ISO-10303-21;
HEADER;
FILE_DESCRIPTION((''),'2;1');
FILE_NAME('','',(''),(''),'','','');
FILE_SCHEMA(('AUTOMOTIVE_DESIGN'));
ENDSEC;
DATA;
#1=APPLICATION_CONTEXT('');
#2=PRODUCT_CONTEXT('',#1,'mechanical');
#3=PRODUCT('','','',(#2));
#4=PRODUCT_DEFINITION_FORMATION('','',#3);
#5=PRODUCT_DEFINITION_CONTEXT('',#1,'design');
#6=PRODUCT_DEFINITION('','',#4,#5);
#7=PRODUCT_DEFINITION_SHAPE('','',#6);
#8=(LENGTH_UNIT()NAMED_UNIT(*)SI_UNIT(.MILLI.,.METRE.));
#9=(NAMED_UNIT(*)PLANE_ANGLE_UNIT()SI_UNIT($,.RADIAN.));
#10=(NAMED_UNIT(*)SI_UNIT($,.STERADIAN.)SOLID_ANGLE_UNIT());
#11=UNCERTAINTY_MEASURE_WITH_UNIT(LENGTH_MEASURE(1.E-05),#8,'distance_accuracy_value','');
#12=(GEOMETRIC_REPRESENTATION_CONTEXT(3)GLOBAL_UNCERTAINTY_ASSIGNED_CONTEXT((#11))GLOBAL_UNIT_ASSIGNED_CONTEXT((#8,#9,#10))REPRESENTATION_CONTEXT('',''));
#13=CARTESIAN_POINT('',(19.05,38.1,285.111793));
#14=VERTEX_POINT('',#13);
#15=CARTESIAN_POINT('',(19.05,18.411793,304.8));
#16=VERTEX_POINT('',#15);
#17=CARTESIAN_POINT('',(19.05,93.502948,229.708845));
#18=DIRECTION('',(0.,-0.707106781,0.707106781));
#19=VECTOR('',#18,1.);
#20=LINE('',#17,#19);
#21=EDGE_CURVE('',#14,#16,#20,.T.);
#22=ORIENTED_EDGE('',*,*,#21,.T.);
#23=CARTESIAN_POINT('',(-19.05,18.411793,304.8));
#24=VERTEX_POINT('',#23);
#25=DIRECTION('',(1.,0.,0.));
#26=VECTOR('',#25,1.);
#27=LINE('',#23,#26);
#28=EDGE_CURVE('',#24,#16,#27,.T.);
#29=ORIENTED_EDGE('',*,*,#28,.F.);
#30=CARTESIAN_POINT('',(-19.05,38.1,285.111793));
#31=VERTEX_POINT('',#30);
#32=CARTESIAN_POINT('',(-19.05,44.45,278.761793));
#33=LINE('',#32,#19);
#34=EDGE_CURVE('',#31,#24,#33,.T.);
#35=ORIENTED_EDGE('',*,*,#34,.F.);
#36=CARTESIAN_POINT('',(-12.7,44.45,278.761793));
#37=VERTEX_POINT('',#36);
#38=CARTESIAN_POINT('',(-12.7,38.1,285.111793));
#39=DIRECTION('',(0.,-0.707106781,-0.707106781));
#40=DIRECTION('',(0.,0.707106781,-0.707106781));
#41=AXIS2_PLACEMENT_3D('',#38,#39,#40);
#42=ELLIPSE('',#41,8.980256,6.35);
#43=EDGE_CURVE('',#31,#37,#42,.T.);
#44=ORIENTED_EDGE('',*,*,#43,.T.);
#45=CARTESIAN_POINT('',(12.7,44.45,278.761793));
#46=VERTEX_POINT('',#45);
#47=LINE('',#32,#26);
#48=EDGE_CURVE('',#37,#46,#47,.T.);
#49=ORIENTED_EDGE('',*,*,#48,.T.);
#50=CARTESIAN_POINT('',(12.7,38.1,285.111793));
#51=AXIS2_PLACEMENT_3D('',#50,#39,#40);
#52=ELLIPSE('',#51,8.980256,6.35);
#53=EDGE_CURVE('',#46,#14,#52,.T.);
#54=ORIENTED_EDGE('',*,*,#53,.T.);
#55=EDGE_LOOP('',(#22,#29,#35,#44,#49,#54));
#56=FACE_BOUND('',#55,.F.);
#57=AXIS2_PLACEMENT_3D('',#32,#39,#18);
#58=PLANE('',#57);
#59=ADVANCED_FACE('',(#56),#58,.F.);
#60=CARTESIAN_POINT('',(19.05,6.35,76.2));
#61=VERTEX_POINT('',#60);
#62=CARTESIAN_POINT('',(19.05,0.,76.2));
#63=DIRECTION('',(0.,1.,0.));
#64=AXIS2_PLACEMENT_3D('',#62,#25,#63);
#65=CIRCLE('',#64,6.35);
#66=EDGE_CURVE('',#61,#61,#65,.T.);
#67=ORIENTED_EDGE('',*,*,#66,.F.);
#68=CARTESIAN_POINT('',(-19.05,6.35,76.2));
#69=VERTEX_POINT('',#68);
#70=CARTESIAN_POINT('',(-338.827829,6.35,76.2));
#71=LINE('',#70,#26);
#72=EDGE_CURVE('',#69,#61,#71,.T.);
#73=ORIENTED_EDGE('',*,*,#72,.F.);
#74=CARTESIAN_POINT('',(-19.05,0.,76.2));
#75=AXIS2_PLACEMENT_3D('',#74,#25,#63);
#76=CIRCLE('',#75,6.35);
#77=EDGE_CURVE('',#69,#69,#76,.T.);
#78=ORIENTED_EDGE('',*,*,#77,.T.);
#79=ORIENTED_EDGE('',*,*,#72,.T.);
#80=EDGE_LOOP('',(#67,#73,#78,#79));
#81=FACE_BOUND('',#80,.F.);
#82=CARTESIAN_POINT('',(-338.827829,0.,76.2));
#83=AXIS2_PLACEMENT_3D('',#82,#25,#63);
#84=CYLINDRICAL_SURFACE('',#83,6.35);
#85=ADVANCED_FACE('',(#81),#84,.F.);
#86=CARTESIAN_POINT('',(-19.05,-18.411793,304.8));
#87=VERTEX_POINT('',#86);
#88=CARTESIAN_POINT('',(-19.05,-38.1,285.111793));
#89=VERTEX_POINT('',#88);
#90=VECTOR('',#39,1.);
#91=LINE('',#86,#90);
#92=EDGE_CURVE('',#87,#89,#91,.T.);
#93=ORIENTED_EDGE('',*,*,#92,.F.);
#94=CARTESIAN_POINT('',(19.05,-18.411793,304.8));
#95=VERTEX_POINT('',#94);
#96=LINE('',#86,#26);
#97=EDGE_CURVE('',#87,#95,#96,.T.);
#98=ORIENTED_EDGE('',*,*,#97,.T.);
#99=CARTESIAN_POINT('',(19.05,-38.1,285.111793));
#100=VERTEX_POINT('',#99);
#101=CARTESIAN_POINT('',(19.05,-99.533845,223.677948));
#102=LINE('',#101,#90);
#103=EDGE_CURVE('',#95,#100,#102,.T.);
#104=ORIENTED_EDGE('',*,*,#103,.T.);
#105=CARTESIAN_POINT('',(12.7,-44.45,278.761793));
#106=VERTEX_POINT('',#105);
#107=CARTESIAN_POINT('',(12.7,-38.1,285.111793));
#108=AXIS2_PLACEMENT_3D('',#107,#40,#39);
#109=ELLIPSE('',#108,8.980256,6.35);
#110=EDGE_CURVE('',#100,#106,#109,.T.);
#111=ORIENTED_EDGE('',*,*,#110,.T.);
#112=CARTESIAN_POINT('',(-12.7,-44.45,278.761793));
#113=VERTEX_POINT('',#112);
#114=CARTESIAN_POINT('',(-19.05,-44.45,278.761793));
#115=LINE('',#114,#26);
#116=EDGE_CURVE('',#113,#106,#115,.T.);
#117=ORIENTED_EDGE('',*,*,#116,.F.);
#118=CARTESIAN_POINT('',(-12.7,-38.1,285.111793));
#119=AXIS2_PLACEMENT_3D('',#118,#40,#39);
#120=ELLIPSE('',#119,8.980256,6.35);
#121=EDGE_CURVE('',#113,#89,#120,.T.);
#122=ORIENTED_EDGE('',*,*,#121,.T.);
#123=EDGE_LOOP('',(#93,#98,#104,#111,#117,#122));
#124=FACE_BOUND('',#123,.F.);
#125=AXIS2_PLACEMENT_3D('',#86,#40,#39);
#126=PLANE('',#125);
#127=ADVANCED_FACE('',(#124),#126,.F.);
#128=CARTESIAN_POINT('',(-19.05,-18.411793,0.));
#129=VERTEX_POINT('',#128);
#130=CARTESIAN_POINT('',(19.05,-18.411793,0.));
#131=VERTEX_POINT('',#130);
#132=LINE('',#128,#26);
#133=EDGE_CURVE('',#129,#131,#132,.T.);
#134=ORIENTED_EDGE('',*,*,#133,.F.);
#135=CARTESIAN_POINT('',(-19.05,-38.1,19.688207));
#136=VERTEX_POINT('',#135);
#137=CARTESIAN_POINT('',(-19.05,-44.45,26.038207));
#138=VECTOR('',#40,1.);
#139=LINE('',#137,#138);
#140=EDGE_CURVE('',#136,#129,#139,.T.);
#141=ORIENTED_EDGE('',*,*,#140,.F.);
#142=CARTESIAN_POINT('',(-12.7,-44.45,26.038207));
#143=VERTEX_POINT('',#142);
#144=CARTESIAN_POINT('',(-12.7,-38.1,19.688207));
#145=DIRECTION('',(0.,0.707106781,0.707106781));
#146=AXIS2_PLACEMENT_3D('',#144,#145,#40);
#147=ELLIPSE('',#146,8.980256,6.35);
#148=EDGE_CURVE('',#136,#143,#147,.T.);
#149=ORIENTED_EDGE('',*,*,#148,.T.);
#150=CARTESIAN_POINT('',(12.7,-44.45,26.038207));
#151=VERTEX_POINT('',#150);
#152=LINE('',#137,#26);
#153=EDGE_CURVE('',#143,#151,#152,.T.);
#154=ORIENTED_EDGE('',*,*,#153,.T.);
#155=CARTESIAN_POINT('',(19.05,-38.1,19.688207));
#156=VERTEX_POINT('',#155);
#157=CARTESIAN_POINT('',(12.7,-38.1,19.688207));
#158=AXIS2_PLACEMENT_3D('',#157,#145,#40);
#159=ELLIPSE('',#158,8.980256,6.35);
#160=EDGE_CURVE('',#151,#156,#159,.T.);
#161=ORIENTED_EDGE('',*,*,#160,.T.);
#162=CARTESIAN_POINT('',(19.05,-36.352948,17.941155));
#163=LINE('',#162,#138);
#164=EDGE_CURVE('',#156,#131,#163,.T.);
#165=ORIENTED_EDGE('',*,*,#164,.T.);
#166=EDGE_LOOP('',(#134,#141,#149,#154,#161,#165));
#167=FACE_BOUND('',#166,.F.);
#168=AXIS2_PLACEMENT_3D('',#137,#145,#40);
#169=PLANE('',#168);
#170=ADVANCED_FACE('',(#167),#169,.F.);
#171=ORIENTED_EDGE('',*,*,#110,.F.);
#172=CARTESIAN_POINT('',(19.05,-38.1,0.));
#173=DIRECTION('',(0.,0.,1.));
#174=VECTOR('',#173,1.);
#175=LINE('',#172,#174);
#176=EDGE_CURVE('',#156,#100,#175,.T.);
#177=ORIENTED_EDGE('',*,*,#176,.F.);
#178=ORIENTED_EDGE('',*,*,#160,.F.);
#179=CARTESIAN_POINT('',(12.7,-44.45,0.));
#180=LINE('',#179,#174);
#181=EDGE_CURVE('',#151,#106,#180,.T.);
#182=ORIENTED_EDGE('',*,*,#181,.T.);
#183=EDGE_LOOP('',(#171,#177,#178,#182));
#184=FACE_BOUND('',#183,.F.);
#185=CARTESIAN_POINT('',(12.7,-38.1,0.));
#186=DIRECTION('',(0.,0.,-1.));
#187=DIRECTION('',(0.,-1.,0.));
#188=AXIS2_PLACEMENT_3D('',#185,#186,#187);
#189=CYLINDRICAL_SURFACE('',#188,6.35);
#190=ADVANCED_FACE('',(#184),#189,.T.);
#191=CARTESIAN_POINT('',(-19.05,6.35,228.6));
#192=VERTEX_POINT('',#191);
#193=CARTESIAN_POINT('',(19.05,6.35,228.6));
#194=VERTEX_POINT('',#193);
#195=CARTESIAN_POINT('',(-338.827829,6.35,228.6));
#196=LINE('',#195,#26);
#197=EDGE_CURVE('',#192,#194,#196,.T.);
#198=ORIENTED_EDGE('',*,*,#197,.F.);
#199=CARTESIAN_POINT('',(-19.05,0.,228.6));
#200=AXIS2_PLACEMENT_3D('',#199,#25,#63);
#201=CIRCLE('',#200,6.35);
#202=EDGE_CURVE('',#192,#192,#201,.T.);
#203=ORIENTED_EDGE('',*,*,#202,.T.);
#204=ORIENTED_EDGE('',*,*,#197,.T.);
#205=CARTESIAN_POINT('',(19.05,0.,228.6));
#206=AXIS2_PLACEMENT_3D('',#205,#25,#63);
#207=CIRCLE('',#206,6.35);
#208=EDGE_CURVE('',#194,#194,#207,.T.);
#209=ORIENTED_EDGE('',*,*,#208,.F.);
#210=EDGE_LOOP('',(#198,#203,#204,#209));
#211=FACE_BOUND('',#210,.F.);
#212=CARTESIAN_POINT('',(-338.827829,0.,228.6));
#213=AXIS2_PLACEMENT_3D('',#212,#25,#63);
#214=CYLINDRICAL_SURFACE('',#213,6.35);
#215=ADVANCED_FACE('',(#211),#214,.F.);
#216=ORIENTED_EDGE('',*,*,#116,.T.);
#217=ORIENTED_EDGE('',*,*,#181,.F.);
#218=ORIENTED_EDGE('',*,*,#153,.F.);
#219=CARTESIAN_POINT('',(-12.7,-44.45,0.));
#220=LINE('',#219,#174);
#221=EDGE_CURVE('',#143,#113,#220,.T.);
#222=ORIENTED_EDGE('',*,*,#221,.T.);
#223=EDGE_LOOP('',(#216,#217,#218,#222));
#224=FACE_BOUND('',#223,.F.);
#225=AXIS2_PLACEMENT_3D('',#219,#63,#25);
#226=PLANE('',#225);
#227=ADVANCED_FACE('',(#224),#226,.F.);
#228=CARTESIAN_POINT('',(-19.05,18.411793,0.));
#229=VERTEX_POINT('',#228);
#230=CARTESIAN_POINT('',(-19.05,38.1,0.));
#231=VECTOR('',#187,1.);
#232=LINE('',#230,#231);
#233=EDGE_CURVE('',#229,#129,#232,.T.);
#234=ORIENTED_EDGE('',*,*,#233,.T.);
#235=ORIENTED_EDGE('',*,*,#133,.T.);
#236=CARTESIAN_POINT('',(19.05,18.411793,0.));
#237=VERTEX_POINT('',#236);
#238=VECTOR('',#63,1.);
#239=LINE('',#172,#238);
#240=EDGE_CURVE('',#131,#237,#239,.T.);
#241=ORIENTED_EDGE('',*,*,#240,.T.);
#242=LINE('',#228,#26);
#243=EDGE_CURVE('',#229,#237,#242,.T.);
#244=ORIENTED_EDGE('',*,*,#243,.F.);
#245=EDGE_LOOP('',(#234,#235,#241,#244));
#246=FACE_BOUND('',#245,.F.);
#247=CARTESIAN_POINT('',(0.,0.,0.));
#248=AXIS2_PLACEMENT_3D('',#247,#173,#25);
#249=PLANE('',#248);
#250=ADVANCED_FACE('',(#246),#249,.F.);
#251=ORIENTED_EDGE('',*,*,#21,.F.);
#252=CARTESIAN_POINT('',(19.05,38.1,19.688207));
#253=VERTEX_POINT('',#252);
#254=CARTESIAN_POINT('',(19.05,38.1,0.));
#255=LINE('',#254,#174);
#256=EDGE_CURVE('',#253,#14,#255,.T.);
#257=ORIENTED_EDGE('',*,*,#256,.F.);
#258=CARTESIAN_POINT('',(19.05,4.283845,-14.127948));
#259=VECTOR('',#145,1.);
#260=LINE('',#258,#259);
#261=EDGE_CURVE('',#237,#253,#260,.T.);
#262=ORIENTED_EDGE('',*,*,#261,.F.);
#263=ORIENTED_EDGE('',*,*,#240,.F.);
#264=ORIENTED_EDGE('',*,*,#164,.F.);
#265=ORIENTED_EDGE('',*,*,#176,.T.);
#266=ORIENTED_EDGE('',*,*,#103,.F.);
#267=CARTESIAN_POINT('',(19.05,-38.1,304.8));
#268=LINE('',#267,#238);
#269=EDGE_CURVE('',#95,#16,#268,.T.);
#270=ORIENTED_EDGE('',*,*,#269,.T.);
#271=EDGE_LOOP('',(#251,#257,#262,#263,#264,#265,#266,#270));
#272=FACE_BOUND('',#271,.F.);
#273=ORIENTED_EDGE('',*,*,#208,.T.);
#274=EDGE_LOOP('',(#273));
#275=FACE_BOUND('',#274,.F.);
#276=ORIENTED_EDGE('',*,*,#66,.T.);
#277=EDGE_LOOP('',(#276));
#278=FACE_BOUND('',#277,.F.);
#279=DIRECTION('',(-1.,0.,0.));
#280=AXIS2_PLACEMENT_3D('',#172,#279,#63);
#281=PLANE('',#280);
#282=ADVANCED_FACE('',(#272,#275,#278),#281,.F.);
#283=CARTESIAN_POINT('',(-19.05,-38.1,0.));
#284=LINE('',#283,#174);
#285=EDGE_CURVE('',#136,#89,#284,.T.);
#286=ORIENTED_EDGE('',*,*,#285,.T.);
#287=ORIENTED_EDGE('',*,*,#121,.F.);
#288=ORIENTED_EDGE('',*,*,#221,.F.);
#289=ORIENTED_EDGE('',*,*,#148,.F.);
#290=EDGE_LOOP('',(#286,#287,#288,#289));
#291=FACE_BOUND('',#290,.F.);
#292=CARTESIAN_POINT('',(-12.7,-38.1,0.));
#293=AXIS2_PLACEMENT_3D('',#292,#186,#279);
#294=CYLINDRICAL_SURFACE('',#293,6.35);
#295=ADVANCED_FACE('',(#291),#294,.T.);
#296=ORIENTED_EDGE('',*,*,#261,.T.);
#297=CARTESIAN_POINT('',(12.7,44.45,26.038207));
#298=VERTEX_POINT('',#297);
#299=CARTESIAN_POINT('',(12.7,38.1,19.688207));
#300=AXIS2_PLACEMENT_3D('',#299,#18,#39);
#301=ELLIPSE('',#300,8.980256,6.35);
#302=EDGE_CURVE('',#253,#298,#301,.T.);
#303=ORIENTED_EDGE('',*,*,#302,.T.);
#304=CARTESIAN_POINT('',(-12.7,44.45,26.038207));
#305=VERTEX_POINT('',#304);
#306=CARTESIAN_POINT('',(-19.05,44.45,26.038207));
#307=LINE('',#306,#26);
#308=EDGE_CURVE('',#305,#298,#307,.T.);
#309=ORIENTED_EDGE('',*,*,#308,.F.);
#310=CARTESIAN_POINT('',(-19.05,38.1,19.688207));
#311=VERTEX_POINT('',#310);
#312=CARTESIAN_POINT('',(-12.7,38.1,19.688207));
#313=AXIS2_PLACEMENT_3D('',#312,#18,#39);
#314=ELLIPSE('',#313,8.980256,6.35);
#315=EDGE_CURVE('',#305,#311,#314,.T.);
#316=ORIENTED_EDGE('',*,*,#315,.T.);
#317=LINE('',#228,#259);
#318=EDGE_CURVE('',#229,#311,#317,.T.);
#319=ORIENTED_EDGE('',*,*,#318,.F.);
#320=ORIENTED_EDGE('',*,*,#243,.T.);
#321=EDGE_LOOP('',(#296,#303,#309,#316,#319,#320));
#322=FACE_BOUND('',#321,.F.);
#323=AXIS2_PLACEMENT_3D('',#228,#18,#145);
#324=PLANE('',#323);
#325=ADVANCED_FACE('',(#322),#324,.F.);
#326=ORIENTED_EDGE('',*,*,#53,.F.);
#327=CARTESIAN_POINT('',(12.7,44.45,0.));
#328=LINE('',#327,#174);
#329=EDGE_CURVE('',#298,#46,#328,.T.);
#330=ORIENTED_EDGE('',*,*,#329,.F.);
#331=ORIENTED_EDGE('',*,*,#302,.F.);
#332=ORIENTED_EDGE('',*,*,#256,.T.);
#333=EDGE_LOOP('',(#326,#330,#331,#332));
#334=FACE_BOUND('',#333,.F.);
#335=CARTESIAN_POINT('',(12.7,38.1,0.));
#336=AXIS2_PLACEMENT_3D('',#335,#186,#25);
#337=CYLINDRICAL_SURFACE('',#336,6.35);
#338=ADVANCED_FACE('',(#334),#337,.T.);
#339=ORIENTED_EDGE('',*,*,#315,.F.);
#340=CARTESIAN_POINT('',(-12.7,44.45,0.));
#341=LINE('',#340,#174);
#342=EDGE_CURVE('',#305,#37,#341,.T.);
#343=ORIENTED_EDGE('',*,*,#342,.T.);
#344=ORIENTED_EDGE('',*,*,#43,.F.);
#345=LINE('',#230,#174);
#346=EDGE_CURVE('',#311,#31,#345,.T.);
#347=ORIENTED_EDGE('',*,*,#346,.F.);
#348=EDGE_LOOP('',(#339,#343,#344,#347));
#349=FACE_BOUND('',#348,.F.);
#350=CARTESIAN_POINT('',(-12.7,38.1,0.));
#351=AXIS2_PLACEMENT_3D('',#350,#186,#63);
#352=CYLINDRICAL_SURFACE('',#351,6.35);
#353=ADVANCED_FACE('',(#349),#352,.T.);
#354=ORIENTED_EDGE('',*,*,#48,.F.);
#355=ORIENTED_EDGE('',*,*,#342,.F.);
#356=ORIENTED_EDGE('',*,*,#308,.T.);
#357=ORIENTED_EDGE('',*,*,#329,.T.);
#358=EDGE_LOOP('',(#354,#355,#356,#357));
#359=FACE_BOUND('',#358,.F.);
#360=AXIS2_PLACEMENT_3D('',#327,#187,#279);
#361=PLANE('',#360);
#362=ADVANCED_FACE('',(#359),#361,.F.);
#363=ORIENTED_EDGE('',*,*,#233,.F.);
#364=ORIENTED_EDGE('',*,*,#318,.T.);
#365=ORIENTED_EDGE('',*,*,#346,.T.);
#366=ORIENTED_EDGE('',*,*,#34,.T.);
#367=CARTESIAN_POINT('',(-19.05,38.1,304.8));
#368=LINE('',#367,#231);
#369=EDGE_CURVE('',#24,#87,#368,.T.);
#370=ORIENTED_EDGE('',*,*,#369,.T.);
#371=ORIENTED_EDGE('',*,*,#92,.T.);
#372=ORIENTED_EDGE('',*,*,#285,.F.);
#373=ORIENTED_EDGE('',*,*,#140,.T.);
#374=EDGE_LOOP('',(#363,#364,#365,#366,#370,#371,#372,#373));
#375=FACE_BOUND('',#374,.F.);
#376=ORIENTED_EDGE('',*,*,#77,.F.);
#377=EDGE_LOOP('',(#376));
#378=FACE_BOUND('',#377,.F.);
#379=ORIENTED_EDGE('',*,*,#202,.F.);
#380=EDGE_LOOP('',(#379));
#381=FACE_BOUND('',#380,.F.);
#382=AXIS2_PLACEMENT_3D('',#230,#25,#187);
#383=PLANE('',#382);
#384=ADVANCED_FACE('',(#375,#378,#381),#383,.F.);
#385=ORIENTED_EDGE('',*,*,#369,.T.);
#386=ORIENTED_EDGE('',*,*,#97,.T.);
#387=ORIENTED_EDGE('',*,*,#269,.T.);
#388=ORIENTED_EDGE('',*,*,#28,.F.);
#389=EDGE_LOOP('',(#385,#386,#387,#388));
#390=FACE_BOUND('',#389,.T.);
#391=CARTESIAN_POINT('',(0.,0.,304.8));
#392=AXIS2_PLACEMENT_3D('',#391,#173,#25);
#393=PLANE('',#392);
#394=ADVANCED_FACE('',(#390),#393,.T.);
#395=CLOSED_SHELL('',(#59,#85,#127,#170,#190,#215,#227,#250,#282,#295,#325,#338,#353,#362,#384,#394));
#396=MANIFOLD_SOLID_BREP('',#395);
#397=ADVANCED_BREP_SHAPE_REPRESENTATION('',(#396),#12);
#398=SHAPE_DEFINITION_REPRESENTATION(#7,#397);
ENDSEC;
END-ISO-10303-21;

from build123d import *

# Parameters (mm, degrees)
F1_DEPTH = 304.8
F3_DEPTH = 50.8
F4_D     = 12.7


with BuildPart() as f1:
    # F0 (on Top) → F1 (new body)
    with BuildSketch(Plane.XY):
        with BuildLine():
            Line((-12.7, -44.45), (12.7, -44.45))
            ThreePointArc((12.7, -44.45), (17.1901280605, -42.5901280605), (19.05, -38.1))
            Line((19.05, -38.1), (19.05, 38.1))
            ThreePointArc((19.05, 38.1), (17.1901280605, 42.5901280605), (12.7, 44.45))
            Line((12.7, 44.45), (-12.7, 44.45))
            ThreePointArc((-12.7, 44.45), (-17.1901280605, 42.5901280605), (-19.05, 38.1))
            Line((-19.05, 38.1), (-19.05, -38.1))
            ThreePointArc((-19.05, -38.1), (-17.1901280605, -42.5901280605), (-12.7, -44.45))
        make_face()
    extrude(amount=F1_DEPTH)

    # F2 (on face) → F3 (cut)
    with BuildSketch(Plane(origin=(-19.05, 0, 0), x_dir=(0, -1, 0), z_dir=(-1, 0, 0))):
        Polygon((-38.1, 304.8), (-44.45, 304.8), (-44.45, 278.7617928475), (-38.1, 285.1117928475), align=None)
        Polygon((-18.4117928475, 304.8), (-38.1, 304.8), (-38.1, 285.1117928475), align=None)
        Polygon((-38.1, 19.6882071525), (-44.45, 26.0382071525), (-44.45, 0), (-38.1, 0), align=None)
        Polygon((-18.4117928475, 0), (-38.1, 19.6882071525), (-38.1, 0), align=None)
        Polygon((38.1, 304.8), (18.4117928475, 304.8), (38.1, 285.1117928475), align=None)
        Polygon((44.45, 304.8), (38.1, 304.8), (38.1, 285.1117928475), (44.45, 278.7617928475), align=None)
        Polygon((38.1, 19.6882071525), (18.4117928475, 0), (38.1, 0), align=None)
        Polygon((44.45, 26.0382071525), (38.1, 19.6882071525), (38.1, 0), (44.45, 0), align=None)
    extrude(amount=-F3_DEPTH, mode=Mode.SUBTRACT)

    # F4 (through all)
    with Locations(Plane(origin=(-19.05, 0, 0), x_dir=(0, -1, 0), z_dir=(-1, 0, 0))):
        with Locations((0, 76.2), (0, 228.6)):
            Hole(F4_D / 2)


solid = f1.part
